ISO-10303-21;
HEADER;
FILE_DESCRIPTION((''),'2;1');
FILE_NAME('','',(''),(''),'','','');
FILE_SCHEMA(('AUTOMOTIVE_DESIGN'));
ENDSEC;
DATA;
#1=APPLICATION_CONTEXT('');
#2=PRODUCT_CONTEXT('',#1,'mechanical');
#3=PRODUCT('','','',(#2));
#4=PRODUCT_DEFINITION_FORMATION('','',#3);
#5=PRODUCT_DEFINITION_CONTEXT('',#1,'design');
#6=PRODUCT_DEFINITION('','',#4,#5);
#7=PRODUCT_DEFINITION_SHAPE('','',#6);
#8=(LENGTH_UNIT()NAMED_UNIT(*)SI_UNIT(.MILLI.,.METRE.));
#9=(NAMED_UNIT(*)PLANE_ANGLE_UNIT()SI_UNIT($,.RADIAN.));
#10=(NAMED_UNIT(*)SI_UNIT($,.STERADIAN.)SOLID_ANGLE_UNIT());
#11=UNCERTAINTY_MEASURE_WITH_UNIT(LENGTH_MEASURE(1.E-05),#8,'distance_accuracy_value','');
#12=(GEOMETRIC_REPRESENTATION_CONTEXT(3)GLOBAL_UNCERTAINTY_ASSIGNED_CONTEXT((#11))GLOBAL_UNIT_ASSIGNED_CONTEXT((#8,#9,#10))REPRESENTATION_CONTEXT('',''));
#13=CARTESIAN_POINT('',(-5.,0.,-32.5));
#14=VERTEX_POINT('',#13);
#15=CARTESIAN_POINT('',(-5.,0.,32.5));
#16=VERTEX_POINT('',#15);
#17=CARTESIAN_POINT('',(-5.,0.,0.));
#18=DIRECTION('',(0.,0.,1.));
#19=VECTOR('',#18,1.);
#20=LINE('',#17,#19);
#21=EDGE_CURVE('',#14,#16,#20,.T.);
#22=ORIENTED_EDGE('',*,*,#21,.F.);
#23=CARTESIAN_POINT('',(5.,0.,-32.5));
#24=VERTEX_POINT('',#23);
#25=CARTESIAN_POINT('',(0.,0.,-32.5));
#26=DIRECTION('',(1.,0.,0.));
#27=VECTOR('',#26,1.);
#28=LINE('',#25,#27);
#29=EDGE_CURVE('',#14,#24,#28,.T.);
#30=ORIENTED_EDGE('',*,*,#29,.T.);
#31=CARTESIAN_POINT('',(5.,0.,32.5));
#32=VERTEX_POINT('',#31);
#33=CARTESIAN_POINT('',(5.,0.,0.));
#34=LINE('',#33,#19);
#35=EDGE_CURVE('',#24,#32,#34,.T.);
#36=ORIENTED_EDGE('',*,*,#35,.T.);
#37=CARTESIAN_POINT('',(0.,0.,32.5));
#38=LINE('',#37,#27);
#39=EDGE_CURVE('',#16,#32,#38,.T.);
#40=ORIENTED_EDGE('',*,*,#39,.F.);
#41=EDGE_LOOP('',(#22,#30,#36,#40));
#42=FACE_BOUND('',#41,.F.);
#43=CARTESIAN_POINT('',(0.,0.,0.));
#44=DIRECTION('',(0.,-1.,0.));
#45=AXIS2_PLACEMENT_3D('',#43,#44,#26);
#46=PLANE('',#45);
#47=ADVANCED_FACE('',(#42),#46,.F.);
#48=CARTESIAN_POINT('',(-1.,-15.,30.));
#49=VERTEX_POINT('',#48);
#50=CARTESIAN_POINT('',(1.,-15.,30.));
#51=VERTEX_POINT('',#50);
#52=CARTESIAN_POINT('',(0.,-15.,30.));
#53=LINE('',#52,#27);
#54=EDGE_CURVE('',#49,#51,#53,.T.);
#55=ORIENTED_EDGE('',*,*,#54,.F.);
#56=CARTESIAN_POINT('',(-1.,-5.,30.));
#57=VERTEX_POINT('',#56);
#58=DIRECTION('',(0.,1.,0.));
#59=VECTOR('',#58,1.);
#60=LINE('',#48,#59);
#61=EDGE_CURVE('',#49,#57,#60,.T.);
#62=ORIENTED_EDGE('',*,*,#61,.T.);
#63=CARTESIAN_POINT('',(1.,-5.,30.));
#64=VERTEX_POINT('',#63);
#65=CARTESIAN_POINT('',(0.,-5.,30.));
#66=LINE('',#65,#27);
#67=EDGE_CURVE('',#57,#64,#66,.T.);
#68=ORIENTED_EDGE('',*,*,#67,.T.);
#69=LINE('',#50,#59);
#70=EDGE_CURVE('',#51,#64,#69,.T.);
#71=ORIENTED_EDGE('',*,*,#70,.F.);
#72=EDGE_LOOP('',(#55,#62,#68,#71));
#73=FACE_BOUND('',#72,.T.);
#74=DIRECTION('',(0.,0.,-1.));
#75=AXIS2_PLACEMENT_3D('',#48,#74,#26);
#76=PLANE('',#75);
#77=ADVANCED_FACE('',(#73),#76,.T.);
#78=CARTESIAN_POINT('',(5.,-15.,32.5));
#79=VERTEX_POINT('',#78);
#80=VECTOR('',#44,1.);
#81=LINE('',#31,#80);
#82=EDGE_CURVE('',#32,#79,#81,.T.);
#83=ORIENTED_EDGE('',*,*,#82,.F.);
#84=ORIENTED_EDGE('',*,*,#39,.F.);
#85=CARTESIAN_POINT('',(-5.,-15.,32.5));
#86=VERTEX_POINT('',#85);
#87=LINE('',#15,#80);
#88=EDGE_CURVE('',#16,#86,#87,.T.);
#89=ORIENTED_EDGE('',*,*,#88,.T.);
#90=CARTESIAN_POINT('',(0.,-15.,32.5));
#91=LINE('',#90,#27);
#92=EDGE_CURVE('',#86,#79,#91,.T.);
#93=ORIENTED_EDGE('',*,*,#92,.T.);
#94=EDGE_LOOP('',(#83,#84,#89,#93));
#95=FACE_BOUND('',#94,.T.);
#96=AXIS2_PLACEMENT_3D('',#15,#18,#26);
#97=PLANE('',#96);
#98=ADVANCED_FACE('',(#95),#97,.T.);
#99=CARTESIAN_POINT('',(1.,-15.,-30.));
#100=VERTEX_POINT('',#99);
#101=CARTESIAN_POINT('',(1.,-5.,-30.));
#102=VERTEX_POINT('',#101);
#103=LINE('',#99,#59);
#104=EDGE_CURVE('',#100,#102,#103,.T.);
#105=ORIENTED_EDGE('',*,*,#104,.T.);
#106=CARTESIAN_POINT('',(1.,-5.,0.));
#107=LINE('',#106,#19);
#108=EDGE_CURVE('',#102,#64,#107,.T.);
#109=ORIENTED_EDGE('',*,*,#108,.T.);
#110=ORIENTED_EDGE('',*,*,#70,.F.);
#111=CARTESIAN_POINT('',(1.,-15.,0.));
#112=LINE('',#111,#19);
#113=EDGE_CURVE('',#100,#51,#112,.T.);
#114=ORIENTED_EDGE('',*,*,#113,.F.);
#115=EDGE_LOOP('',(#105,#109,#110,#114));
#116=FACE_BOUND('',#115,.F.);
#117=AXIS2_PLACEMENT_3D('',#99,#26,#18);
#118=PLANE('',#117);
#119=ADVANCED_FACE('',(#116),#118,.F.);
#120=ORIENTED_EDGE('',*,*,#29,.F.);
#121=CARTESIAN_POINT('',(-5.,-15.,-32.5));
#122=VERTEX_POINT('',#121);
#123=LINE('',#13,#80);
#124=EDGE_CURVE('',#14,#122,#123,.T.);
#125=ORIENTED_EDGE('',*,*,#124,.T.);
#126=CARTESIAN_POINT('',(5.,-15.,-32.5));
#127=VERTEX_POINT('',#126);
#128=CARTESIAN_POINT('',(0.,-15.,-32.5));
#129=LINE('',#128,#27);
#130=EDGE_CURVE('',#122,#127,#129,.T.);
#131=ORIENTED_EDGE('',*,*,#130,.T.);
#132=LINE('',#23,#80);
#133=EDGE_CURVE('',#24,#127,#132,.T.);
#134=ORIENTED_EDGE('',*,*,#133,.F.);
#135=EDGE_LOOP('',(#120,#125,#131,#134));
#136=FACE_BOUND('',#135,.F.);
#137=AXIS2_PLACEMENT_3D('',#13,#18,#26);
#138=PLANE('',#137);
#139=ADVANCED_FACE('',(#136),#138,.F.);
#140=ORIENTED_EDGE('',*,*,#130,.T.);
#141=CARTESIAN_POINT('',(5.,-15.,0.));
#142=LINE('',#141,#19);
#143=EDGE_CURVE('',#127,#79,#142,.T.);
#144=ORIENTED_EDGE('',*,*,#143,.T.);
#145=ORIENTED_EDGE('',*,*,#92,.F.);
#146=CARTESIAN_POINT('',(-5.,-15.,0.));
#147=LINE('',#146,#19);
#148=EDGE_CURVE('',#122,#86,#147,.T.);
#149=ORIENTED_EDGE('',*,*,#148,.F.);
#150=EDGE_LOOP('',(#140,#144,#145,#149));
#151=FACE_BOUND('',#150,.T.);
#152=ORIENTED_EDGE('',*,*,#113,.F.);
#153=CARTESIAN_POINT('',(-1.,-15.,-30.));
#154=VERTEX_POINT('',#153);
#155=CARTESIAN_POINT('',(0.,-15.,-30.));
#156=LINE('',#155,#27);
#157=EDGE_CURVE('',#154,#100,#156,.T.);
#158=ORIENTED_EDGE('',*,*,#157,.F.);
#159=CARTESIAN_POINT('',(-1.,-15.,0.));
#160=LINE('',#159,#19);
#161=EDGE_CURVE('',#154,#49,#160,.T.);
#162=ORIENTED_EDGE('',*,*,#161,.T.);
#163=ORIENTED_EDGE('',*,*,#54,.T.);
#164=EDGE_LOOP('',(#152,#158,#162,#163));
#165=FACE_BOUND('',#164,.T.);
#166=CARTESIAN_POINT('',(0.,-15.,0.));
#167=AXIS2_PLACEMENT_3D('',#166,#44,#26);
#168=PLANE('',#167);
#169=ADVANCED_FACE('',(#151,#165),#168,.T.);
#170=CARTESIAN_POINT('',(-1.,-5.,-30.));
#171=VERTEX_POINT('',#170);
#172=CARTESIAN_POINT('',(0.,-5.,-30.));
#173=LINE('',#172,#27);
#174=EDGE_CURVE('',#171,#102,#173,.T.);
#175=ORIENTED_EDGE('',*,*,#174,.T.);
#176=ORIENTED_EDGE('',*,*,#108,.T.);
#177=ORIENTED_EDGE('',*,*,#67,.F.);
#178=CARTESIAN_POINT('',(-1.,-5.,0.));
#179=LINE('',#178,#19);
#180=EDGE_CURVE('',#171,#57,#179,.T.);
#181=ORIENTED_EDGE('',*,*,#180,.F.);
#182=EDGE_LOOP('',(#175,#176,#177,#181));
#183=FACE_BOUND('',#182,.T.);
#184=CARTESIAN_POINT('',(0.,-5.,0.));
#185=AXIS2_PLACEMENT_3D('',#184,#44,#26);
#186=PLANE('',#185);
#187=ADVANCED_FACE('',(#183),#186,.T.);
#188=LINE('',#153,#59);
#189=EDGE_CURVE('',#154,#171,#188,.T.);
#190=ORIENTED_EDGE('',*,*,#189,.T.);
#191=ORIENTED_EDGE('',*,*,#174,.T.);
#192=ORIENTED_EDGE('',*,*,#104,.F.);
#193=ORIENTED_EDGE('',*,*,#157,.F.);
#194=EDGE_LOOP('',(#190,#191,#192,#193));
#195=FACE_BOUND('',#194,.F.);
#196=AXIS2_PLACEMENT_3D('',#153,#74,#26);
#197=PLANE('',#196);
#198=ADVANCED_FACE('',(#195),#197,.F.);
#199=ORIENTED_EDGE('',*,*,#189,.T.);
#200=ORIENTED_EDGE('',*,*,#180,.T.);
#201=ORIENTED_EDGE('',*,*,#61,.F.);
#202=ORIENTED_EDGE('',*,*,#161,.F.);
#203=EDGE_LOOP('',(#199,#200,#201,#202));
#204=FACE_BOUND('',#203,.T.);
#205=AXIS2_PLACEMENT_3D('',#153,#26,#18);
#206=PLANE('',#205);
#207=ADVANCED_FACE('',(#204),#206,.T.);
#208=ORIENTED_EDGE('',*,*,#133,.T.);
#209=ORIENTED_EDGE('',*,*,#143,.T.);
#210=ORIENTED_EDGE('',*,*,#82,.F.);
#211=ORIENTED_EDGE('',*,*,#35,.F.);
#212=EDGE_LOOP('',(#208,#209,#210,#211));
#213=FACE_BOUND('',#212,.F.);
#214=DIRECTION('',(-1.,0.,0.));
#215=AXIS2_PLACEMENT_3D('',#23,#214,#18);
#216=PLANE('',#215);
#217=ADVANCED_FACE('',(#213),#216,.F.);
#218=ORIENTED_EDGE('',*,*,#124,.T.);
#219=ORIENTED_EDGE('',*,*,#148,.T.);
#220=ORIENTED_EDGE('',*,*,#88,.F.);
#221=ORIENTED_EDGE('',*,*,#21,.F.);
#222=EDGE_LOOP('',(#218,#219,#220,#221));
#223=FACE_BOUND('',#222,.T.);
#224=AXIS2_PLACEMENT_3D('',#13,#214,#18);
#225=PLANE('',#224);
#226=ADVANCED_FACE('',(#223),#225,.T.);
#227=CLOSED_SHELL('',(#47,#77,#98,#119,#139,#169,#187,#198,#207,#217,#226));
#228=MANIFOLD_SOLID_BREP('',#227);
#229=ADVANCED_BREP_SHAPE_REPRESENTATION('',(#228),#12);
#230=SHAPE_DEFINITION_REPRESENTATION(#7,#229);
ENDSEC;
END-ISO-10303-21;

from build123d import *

# Parameters (mm, degrees)
F0_W     = 10
F0_H     = 65
F1_DEPTH = 15
F2_W     = 2
F2_H     = 60
F3_DEPTH = 10


# Not quite as in the source:
# - a feature names something its author has since deleted; it is built from what else it names


with BuildPart() as f1:
    # F0 (on Front) → F1 (new body)
    with BuildSketch(Plane.XZ):
        Rectangle(F0_W, F0_H)
    extrude(amount=F1_DEPTH)

    # F2 (on face) → F3 (cut)
    with BuildSketch(Plane.XZ.offset(15)):
        Rectangle(F2_W, F2_H)
    extrude(amount=-F3_DEPTH, mode=Mode.SUBTRACT)


solid = f1.part
